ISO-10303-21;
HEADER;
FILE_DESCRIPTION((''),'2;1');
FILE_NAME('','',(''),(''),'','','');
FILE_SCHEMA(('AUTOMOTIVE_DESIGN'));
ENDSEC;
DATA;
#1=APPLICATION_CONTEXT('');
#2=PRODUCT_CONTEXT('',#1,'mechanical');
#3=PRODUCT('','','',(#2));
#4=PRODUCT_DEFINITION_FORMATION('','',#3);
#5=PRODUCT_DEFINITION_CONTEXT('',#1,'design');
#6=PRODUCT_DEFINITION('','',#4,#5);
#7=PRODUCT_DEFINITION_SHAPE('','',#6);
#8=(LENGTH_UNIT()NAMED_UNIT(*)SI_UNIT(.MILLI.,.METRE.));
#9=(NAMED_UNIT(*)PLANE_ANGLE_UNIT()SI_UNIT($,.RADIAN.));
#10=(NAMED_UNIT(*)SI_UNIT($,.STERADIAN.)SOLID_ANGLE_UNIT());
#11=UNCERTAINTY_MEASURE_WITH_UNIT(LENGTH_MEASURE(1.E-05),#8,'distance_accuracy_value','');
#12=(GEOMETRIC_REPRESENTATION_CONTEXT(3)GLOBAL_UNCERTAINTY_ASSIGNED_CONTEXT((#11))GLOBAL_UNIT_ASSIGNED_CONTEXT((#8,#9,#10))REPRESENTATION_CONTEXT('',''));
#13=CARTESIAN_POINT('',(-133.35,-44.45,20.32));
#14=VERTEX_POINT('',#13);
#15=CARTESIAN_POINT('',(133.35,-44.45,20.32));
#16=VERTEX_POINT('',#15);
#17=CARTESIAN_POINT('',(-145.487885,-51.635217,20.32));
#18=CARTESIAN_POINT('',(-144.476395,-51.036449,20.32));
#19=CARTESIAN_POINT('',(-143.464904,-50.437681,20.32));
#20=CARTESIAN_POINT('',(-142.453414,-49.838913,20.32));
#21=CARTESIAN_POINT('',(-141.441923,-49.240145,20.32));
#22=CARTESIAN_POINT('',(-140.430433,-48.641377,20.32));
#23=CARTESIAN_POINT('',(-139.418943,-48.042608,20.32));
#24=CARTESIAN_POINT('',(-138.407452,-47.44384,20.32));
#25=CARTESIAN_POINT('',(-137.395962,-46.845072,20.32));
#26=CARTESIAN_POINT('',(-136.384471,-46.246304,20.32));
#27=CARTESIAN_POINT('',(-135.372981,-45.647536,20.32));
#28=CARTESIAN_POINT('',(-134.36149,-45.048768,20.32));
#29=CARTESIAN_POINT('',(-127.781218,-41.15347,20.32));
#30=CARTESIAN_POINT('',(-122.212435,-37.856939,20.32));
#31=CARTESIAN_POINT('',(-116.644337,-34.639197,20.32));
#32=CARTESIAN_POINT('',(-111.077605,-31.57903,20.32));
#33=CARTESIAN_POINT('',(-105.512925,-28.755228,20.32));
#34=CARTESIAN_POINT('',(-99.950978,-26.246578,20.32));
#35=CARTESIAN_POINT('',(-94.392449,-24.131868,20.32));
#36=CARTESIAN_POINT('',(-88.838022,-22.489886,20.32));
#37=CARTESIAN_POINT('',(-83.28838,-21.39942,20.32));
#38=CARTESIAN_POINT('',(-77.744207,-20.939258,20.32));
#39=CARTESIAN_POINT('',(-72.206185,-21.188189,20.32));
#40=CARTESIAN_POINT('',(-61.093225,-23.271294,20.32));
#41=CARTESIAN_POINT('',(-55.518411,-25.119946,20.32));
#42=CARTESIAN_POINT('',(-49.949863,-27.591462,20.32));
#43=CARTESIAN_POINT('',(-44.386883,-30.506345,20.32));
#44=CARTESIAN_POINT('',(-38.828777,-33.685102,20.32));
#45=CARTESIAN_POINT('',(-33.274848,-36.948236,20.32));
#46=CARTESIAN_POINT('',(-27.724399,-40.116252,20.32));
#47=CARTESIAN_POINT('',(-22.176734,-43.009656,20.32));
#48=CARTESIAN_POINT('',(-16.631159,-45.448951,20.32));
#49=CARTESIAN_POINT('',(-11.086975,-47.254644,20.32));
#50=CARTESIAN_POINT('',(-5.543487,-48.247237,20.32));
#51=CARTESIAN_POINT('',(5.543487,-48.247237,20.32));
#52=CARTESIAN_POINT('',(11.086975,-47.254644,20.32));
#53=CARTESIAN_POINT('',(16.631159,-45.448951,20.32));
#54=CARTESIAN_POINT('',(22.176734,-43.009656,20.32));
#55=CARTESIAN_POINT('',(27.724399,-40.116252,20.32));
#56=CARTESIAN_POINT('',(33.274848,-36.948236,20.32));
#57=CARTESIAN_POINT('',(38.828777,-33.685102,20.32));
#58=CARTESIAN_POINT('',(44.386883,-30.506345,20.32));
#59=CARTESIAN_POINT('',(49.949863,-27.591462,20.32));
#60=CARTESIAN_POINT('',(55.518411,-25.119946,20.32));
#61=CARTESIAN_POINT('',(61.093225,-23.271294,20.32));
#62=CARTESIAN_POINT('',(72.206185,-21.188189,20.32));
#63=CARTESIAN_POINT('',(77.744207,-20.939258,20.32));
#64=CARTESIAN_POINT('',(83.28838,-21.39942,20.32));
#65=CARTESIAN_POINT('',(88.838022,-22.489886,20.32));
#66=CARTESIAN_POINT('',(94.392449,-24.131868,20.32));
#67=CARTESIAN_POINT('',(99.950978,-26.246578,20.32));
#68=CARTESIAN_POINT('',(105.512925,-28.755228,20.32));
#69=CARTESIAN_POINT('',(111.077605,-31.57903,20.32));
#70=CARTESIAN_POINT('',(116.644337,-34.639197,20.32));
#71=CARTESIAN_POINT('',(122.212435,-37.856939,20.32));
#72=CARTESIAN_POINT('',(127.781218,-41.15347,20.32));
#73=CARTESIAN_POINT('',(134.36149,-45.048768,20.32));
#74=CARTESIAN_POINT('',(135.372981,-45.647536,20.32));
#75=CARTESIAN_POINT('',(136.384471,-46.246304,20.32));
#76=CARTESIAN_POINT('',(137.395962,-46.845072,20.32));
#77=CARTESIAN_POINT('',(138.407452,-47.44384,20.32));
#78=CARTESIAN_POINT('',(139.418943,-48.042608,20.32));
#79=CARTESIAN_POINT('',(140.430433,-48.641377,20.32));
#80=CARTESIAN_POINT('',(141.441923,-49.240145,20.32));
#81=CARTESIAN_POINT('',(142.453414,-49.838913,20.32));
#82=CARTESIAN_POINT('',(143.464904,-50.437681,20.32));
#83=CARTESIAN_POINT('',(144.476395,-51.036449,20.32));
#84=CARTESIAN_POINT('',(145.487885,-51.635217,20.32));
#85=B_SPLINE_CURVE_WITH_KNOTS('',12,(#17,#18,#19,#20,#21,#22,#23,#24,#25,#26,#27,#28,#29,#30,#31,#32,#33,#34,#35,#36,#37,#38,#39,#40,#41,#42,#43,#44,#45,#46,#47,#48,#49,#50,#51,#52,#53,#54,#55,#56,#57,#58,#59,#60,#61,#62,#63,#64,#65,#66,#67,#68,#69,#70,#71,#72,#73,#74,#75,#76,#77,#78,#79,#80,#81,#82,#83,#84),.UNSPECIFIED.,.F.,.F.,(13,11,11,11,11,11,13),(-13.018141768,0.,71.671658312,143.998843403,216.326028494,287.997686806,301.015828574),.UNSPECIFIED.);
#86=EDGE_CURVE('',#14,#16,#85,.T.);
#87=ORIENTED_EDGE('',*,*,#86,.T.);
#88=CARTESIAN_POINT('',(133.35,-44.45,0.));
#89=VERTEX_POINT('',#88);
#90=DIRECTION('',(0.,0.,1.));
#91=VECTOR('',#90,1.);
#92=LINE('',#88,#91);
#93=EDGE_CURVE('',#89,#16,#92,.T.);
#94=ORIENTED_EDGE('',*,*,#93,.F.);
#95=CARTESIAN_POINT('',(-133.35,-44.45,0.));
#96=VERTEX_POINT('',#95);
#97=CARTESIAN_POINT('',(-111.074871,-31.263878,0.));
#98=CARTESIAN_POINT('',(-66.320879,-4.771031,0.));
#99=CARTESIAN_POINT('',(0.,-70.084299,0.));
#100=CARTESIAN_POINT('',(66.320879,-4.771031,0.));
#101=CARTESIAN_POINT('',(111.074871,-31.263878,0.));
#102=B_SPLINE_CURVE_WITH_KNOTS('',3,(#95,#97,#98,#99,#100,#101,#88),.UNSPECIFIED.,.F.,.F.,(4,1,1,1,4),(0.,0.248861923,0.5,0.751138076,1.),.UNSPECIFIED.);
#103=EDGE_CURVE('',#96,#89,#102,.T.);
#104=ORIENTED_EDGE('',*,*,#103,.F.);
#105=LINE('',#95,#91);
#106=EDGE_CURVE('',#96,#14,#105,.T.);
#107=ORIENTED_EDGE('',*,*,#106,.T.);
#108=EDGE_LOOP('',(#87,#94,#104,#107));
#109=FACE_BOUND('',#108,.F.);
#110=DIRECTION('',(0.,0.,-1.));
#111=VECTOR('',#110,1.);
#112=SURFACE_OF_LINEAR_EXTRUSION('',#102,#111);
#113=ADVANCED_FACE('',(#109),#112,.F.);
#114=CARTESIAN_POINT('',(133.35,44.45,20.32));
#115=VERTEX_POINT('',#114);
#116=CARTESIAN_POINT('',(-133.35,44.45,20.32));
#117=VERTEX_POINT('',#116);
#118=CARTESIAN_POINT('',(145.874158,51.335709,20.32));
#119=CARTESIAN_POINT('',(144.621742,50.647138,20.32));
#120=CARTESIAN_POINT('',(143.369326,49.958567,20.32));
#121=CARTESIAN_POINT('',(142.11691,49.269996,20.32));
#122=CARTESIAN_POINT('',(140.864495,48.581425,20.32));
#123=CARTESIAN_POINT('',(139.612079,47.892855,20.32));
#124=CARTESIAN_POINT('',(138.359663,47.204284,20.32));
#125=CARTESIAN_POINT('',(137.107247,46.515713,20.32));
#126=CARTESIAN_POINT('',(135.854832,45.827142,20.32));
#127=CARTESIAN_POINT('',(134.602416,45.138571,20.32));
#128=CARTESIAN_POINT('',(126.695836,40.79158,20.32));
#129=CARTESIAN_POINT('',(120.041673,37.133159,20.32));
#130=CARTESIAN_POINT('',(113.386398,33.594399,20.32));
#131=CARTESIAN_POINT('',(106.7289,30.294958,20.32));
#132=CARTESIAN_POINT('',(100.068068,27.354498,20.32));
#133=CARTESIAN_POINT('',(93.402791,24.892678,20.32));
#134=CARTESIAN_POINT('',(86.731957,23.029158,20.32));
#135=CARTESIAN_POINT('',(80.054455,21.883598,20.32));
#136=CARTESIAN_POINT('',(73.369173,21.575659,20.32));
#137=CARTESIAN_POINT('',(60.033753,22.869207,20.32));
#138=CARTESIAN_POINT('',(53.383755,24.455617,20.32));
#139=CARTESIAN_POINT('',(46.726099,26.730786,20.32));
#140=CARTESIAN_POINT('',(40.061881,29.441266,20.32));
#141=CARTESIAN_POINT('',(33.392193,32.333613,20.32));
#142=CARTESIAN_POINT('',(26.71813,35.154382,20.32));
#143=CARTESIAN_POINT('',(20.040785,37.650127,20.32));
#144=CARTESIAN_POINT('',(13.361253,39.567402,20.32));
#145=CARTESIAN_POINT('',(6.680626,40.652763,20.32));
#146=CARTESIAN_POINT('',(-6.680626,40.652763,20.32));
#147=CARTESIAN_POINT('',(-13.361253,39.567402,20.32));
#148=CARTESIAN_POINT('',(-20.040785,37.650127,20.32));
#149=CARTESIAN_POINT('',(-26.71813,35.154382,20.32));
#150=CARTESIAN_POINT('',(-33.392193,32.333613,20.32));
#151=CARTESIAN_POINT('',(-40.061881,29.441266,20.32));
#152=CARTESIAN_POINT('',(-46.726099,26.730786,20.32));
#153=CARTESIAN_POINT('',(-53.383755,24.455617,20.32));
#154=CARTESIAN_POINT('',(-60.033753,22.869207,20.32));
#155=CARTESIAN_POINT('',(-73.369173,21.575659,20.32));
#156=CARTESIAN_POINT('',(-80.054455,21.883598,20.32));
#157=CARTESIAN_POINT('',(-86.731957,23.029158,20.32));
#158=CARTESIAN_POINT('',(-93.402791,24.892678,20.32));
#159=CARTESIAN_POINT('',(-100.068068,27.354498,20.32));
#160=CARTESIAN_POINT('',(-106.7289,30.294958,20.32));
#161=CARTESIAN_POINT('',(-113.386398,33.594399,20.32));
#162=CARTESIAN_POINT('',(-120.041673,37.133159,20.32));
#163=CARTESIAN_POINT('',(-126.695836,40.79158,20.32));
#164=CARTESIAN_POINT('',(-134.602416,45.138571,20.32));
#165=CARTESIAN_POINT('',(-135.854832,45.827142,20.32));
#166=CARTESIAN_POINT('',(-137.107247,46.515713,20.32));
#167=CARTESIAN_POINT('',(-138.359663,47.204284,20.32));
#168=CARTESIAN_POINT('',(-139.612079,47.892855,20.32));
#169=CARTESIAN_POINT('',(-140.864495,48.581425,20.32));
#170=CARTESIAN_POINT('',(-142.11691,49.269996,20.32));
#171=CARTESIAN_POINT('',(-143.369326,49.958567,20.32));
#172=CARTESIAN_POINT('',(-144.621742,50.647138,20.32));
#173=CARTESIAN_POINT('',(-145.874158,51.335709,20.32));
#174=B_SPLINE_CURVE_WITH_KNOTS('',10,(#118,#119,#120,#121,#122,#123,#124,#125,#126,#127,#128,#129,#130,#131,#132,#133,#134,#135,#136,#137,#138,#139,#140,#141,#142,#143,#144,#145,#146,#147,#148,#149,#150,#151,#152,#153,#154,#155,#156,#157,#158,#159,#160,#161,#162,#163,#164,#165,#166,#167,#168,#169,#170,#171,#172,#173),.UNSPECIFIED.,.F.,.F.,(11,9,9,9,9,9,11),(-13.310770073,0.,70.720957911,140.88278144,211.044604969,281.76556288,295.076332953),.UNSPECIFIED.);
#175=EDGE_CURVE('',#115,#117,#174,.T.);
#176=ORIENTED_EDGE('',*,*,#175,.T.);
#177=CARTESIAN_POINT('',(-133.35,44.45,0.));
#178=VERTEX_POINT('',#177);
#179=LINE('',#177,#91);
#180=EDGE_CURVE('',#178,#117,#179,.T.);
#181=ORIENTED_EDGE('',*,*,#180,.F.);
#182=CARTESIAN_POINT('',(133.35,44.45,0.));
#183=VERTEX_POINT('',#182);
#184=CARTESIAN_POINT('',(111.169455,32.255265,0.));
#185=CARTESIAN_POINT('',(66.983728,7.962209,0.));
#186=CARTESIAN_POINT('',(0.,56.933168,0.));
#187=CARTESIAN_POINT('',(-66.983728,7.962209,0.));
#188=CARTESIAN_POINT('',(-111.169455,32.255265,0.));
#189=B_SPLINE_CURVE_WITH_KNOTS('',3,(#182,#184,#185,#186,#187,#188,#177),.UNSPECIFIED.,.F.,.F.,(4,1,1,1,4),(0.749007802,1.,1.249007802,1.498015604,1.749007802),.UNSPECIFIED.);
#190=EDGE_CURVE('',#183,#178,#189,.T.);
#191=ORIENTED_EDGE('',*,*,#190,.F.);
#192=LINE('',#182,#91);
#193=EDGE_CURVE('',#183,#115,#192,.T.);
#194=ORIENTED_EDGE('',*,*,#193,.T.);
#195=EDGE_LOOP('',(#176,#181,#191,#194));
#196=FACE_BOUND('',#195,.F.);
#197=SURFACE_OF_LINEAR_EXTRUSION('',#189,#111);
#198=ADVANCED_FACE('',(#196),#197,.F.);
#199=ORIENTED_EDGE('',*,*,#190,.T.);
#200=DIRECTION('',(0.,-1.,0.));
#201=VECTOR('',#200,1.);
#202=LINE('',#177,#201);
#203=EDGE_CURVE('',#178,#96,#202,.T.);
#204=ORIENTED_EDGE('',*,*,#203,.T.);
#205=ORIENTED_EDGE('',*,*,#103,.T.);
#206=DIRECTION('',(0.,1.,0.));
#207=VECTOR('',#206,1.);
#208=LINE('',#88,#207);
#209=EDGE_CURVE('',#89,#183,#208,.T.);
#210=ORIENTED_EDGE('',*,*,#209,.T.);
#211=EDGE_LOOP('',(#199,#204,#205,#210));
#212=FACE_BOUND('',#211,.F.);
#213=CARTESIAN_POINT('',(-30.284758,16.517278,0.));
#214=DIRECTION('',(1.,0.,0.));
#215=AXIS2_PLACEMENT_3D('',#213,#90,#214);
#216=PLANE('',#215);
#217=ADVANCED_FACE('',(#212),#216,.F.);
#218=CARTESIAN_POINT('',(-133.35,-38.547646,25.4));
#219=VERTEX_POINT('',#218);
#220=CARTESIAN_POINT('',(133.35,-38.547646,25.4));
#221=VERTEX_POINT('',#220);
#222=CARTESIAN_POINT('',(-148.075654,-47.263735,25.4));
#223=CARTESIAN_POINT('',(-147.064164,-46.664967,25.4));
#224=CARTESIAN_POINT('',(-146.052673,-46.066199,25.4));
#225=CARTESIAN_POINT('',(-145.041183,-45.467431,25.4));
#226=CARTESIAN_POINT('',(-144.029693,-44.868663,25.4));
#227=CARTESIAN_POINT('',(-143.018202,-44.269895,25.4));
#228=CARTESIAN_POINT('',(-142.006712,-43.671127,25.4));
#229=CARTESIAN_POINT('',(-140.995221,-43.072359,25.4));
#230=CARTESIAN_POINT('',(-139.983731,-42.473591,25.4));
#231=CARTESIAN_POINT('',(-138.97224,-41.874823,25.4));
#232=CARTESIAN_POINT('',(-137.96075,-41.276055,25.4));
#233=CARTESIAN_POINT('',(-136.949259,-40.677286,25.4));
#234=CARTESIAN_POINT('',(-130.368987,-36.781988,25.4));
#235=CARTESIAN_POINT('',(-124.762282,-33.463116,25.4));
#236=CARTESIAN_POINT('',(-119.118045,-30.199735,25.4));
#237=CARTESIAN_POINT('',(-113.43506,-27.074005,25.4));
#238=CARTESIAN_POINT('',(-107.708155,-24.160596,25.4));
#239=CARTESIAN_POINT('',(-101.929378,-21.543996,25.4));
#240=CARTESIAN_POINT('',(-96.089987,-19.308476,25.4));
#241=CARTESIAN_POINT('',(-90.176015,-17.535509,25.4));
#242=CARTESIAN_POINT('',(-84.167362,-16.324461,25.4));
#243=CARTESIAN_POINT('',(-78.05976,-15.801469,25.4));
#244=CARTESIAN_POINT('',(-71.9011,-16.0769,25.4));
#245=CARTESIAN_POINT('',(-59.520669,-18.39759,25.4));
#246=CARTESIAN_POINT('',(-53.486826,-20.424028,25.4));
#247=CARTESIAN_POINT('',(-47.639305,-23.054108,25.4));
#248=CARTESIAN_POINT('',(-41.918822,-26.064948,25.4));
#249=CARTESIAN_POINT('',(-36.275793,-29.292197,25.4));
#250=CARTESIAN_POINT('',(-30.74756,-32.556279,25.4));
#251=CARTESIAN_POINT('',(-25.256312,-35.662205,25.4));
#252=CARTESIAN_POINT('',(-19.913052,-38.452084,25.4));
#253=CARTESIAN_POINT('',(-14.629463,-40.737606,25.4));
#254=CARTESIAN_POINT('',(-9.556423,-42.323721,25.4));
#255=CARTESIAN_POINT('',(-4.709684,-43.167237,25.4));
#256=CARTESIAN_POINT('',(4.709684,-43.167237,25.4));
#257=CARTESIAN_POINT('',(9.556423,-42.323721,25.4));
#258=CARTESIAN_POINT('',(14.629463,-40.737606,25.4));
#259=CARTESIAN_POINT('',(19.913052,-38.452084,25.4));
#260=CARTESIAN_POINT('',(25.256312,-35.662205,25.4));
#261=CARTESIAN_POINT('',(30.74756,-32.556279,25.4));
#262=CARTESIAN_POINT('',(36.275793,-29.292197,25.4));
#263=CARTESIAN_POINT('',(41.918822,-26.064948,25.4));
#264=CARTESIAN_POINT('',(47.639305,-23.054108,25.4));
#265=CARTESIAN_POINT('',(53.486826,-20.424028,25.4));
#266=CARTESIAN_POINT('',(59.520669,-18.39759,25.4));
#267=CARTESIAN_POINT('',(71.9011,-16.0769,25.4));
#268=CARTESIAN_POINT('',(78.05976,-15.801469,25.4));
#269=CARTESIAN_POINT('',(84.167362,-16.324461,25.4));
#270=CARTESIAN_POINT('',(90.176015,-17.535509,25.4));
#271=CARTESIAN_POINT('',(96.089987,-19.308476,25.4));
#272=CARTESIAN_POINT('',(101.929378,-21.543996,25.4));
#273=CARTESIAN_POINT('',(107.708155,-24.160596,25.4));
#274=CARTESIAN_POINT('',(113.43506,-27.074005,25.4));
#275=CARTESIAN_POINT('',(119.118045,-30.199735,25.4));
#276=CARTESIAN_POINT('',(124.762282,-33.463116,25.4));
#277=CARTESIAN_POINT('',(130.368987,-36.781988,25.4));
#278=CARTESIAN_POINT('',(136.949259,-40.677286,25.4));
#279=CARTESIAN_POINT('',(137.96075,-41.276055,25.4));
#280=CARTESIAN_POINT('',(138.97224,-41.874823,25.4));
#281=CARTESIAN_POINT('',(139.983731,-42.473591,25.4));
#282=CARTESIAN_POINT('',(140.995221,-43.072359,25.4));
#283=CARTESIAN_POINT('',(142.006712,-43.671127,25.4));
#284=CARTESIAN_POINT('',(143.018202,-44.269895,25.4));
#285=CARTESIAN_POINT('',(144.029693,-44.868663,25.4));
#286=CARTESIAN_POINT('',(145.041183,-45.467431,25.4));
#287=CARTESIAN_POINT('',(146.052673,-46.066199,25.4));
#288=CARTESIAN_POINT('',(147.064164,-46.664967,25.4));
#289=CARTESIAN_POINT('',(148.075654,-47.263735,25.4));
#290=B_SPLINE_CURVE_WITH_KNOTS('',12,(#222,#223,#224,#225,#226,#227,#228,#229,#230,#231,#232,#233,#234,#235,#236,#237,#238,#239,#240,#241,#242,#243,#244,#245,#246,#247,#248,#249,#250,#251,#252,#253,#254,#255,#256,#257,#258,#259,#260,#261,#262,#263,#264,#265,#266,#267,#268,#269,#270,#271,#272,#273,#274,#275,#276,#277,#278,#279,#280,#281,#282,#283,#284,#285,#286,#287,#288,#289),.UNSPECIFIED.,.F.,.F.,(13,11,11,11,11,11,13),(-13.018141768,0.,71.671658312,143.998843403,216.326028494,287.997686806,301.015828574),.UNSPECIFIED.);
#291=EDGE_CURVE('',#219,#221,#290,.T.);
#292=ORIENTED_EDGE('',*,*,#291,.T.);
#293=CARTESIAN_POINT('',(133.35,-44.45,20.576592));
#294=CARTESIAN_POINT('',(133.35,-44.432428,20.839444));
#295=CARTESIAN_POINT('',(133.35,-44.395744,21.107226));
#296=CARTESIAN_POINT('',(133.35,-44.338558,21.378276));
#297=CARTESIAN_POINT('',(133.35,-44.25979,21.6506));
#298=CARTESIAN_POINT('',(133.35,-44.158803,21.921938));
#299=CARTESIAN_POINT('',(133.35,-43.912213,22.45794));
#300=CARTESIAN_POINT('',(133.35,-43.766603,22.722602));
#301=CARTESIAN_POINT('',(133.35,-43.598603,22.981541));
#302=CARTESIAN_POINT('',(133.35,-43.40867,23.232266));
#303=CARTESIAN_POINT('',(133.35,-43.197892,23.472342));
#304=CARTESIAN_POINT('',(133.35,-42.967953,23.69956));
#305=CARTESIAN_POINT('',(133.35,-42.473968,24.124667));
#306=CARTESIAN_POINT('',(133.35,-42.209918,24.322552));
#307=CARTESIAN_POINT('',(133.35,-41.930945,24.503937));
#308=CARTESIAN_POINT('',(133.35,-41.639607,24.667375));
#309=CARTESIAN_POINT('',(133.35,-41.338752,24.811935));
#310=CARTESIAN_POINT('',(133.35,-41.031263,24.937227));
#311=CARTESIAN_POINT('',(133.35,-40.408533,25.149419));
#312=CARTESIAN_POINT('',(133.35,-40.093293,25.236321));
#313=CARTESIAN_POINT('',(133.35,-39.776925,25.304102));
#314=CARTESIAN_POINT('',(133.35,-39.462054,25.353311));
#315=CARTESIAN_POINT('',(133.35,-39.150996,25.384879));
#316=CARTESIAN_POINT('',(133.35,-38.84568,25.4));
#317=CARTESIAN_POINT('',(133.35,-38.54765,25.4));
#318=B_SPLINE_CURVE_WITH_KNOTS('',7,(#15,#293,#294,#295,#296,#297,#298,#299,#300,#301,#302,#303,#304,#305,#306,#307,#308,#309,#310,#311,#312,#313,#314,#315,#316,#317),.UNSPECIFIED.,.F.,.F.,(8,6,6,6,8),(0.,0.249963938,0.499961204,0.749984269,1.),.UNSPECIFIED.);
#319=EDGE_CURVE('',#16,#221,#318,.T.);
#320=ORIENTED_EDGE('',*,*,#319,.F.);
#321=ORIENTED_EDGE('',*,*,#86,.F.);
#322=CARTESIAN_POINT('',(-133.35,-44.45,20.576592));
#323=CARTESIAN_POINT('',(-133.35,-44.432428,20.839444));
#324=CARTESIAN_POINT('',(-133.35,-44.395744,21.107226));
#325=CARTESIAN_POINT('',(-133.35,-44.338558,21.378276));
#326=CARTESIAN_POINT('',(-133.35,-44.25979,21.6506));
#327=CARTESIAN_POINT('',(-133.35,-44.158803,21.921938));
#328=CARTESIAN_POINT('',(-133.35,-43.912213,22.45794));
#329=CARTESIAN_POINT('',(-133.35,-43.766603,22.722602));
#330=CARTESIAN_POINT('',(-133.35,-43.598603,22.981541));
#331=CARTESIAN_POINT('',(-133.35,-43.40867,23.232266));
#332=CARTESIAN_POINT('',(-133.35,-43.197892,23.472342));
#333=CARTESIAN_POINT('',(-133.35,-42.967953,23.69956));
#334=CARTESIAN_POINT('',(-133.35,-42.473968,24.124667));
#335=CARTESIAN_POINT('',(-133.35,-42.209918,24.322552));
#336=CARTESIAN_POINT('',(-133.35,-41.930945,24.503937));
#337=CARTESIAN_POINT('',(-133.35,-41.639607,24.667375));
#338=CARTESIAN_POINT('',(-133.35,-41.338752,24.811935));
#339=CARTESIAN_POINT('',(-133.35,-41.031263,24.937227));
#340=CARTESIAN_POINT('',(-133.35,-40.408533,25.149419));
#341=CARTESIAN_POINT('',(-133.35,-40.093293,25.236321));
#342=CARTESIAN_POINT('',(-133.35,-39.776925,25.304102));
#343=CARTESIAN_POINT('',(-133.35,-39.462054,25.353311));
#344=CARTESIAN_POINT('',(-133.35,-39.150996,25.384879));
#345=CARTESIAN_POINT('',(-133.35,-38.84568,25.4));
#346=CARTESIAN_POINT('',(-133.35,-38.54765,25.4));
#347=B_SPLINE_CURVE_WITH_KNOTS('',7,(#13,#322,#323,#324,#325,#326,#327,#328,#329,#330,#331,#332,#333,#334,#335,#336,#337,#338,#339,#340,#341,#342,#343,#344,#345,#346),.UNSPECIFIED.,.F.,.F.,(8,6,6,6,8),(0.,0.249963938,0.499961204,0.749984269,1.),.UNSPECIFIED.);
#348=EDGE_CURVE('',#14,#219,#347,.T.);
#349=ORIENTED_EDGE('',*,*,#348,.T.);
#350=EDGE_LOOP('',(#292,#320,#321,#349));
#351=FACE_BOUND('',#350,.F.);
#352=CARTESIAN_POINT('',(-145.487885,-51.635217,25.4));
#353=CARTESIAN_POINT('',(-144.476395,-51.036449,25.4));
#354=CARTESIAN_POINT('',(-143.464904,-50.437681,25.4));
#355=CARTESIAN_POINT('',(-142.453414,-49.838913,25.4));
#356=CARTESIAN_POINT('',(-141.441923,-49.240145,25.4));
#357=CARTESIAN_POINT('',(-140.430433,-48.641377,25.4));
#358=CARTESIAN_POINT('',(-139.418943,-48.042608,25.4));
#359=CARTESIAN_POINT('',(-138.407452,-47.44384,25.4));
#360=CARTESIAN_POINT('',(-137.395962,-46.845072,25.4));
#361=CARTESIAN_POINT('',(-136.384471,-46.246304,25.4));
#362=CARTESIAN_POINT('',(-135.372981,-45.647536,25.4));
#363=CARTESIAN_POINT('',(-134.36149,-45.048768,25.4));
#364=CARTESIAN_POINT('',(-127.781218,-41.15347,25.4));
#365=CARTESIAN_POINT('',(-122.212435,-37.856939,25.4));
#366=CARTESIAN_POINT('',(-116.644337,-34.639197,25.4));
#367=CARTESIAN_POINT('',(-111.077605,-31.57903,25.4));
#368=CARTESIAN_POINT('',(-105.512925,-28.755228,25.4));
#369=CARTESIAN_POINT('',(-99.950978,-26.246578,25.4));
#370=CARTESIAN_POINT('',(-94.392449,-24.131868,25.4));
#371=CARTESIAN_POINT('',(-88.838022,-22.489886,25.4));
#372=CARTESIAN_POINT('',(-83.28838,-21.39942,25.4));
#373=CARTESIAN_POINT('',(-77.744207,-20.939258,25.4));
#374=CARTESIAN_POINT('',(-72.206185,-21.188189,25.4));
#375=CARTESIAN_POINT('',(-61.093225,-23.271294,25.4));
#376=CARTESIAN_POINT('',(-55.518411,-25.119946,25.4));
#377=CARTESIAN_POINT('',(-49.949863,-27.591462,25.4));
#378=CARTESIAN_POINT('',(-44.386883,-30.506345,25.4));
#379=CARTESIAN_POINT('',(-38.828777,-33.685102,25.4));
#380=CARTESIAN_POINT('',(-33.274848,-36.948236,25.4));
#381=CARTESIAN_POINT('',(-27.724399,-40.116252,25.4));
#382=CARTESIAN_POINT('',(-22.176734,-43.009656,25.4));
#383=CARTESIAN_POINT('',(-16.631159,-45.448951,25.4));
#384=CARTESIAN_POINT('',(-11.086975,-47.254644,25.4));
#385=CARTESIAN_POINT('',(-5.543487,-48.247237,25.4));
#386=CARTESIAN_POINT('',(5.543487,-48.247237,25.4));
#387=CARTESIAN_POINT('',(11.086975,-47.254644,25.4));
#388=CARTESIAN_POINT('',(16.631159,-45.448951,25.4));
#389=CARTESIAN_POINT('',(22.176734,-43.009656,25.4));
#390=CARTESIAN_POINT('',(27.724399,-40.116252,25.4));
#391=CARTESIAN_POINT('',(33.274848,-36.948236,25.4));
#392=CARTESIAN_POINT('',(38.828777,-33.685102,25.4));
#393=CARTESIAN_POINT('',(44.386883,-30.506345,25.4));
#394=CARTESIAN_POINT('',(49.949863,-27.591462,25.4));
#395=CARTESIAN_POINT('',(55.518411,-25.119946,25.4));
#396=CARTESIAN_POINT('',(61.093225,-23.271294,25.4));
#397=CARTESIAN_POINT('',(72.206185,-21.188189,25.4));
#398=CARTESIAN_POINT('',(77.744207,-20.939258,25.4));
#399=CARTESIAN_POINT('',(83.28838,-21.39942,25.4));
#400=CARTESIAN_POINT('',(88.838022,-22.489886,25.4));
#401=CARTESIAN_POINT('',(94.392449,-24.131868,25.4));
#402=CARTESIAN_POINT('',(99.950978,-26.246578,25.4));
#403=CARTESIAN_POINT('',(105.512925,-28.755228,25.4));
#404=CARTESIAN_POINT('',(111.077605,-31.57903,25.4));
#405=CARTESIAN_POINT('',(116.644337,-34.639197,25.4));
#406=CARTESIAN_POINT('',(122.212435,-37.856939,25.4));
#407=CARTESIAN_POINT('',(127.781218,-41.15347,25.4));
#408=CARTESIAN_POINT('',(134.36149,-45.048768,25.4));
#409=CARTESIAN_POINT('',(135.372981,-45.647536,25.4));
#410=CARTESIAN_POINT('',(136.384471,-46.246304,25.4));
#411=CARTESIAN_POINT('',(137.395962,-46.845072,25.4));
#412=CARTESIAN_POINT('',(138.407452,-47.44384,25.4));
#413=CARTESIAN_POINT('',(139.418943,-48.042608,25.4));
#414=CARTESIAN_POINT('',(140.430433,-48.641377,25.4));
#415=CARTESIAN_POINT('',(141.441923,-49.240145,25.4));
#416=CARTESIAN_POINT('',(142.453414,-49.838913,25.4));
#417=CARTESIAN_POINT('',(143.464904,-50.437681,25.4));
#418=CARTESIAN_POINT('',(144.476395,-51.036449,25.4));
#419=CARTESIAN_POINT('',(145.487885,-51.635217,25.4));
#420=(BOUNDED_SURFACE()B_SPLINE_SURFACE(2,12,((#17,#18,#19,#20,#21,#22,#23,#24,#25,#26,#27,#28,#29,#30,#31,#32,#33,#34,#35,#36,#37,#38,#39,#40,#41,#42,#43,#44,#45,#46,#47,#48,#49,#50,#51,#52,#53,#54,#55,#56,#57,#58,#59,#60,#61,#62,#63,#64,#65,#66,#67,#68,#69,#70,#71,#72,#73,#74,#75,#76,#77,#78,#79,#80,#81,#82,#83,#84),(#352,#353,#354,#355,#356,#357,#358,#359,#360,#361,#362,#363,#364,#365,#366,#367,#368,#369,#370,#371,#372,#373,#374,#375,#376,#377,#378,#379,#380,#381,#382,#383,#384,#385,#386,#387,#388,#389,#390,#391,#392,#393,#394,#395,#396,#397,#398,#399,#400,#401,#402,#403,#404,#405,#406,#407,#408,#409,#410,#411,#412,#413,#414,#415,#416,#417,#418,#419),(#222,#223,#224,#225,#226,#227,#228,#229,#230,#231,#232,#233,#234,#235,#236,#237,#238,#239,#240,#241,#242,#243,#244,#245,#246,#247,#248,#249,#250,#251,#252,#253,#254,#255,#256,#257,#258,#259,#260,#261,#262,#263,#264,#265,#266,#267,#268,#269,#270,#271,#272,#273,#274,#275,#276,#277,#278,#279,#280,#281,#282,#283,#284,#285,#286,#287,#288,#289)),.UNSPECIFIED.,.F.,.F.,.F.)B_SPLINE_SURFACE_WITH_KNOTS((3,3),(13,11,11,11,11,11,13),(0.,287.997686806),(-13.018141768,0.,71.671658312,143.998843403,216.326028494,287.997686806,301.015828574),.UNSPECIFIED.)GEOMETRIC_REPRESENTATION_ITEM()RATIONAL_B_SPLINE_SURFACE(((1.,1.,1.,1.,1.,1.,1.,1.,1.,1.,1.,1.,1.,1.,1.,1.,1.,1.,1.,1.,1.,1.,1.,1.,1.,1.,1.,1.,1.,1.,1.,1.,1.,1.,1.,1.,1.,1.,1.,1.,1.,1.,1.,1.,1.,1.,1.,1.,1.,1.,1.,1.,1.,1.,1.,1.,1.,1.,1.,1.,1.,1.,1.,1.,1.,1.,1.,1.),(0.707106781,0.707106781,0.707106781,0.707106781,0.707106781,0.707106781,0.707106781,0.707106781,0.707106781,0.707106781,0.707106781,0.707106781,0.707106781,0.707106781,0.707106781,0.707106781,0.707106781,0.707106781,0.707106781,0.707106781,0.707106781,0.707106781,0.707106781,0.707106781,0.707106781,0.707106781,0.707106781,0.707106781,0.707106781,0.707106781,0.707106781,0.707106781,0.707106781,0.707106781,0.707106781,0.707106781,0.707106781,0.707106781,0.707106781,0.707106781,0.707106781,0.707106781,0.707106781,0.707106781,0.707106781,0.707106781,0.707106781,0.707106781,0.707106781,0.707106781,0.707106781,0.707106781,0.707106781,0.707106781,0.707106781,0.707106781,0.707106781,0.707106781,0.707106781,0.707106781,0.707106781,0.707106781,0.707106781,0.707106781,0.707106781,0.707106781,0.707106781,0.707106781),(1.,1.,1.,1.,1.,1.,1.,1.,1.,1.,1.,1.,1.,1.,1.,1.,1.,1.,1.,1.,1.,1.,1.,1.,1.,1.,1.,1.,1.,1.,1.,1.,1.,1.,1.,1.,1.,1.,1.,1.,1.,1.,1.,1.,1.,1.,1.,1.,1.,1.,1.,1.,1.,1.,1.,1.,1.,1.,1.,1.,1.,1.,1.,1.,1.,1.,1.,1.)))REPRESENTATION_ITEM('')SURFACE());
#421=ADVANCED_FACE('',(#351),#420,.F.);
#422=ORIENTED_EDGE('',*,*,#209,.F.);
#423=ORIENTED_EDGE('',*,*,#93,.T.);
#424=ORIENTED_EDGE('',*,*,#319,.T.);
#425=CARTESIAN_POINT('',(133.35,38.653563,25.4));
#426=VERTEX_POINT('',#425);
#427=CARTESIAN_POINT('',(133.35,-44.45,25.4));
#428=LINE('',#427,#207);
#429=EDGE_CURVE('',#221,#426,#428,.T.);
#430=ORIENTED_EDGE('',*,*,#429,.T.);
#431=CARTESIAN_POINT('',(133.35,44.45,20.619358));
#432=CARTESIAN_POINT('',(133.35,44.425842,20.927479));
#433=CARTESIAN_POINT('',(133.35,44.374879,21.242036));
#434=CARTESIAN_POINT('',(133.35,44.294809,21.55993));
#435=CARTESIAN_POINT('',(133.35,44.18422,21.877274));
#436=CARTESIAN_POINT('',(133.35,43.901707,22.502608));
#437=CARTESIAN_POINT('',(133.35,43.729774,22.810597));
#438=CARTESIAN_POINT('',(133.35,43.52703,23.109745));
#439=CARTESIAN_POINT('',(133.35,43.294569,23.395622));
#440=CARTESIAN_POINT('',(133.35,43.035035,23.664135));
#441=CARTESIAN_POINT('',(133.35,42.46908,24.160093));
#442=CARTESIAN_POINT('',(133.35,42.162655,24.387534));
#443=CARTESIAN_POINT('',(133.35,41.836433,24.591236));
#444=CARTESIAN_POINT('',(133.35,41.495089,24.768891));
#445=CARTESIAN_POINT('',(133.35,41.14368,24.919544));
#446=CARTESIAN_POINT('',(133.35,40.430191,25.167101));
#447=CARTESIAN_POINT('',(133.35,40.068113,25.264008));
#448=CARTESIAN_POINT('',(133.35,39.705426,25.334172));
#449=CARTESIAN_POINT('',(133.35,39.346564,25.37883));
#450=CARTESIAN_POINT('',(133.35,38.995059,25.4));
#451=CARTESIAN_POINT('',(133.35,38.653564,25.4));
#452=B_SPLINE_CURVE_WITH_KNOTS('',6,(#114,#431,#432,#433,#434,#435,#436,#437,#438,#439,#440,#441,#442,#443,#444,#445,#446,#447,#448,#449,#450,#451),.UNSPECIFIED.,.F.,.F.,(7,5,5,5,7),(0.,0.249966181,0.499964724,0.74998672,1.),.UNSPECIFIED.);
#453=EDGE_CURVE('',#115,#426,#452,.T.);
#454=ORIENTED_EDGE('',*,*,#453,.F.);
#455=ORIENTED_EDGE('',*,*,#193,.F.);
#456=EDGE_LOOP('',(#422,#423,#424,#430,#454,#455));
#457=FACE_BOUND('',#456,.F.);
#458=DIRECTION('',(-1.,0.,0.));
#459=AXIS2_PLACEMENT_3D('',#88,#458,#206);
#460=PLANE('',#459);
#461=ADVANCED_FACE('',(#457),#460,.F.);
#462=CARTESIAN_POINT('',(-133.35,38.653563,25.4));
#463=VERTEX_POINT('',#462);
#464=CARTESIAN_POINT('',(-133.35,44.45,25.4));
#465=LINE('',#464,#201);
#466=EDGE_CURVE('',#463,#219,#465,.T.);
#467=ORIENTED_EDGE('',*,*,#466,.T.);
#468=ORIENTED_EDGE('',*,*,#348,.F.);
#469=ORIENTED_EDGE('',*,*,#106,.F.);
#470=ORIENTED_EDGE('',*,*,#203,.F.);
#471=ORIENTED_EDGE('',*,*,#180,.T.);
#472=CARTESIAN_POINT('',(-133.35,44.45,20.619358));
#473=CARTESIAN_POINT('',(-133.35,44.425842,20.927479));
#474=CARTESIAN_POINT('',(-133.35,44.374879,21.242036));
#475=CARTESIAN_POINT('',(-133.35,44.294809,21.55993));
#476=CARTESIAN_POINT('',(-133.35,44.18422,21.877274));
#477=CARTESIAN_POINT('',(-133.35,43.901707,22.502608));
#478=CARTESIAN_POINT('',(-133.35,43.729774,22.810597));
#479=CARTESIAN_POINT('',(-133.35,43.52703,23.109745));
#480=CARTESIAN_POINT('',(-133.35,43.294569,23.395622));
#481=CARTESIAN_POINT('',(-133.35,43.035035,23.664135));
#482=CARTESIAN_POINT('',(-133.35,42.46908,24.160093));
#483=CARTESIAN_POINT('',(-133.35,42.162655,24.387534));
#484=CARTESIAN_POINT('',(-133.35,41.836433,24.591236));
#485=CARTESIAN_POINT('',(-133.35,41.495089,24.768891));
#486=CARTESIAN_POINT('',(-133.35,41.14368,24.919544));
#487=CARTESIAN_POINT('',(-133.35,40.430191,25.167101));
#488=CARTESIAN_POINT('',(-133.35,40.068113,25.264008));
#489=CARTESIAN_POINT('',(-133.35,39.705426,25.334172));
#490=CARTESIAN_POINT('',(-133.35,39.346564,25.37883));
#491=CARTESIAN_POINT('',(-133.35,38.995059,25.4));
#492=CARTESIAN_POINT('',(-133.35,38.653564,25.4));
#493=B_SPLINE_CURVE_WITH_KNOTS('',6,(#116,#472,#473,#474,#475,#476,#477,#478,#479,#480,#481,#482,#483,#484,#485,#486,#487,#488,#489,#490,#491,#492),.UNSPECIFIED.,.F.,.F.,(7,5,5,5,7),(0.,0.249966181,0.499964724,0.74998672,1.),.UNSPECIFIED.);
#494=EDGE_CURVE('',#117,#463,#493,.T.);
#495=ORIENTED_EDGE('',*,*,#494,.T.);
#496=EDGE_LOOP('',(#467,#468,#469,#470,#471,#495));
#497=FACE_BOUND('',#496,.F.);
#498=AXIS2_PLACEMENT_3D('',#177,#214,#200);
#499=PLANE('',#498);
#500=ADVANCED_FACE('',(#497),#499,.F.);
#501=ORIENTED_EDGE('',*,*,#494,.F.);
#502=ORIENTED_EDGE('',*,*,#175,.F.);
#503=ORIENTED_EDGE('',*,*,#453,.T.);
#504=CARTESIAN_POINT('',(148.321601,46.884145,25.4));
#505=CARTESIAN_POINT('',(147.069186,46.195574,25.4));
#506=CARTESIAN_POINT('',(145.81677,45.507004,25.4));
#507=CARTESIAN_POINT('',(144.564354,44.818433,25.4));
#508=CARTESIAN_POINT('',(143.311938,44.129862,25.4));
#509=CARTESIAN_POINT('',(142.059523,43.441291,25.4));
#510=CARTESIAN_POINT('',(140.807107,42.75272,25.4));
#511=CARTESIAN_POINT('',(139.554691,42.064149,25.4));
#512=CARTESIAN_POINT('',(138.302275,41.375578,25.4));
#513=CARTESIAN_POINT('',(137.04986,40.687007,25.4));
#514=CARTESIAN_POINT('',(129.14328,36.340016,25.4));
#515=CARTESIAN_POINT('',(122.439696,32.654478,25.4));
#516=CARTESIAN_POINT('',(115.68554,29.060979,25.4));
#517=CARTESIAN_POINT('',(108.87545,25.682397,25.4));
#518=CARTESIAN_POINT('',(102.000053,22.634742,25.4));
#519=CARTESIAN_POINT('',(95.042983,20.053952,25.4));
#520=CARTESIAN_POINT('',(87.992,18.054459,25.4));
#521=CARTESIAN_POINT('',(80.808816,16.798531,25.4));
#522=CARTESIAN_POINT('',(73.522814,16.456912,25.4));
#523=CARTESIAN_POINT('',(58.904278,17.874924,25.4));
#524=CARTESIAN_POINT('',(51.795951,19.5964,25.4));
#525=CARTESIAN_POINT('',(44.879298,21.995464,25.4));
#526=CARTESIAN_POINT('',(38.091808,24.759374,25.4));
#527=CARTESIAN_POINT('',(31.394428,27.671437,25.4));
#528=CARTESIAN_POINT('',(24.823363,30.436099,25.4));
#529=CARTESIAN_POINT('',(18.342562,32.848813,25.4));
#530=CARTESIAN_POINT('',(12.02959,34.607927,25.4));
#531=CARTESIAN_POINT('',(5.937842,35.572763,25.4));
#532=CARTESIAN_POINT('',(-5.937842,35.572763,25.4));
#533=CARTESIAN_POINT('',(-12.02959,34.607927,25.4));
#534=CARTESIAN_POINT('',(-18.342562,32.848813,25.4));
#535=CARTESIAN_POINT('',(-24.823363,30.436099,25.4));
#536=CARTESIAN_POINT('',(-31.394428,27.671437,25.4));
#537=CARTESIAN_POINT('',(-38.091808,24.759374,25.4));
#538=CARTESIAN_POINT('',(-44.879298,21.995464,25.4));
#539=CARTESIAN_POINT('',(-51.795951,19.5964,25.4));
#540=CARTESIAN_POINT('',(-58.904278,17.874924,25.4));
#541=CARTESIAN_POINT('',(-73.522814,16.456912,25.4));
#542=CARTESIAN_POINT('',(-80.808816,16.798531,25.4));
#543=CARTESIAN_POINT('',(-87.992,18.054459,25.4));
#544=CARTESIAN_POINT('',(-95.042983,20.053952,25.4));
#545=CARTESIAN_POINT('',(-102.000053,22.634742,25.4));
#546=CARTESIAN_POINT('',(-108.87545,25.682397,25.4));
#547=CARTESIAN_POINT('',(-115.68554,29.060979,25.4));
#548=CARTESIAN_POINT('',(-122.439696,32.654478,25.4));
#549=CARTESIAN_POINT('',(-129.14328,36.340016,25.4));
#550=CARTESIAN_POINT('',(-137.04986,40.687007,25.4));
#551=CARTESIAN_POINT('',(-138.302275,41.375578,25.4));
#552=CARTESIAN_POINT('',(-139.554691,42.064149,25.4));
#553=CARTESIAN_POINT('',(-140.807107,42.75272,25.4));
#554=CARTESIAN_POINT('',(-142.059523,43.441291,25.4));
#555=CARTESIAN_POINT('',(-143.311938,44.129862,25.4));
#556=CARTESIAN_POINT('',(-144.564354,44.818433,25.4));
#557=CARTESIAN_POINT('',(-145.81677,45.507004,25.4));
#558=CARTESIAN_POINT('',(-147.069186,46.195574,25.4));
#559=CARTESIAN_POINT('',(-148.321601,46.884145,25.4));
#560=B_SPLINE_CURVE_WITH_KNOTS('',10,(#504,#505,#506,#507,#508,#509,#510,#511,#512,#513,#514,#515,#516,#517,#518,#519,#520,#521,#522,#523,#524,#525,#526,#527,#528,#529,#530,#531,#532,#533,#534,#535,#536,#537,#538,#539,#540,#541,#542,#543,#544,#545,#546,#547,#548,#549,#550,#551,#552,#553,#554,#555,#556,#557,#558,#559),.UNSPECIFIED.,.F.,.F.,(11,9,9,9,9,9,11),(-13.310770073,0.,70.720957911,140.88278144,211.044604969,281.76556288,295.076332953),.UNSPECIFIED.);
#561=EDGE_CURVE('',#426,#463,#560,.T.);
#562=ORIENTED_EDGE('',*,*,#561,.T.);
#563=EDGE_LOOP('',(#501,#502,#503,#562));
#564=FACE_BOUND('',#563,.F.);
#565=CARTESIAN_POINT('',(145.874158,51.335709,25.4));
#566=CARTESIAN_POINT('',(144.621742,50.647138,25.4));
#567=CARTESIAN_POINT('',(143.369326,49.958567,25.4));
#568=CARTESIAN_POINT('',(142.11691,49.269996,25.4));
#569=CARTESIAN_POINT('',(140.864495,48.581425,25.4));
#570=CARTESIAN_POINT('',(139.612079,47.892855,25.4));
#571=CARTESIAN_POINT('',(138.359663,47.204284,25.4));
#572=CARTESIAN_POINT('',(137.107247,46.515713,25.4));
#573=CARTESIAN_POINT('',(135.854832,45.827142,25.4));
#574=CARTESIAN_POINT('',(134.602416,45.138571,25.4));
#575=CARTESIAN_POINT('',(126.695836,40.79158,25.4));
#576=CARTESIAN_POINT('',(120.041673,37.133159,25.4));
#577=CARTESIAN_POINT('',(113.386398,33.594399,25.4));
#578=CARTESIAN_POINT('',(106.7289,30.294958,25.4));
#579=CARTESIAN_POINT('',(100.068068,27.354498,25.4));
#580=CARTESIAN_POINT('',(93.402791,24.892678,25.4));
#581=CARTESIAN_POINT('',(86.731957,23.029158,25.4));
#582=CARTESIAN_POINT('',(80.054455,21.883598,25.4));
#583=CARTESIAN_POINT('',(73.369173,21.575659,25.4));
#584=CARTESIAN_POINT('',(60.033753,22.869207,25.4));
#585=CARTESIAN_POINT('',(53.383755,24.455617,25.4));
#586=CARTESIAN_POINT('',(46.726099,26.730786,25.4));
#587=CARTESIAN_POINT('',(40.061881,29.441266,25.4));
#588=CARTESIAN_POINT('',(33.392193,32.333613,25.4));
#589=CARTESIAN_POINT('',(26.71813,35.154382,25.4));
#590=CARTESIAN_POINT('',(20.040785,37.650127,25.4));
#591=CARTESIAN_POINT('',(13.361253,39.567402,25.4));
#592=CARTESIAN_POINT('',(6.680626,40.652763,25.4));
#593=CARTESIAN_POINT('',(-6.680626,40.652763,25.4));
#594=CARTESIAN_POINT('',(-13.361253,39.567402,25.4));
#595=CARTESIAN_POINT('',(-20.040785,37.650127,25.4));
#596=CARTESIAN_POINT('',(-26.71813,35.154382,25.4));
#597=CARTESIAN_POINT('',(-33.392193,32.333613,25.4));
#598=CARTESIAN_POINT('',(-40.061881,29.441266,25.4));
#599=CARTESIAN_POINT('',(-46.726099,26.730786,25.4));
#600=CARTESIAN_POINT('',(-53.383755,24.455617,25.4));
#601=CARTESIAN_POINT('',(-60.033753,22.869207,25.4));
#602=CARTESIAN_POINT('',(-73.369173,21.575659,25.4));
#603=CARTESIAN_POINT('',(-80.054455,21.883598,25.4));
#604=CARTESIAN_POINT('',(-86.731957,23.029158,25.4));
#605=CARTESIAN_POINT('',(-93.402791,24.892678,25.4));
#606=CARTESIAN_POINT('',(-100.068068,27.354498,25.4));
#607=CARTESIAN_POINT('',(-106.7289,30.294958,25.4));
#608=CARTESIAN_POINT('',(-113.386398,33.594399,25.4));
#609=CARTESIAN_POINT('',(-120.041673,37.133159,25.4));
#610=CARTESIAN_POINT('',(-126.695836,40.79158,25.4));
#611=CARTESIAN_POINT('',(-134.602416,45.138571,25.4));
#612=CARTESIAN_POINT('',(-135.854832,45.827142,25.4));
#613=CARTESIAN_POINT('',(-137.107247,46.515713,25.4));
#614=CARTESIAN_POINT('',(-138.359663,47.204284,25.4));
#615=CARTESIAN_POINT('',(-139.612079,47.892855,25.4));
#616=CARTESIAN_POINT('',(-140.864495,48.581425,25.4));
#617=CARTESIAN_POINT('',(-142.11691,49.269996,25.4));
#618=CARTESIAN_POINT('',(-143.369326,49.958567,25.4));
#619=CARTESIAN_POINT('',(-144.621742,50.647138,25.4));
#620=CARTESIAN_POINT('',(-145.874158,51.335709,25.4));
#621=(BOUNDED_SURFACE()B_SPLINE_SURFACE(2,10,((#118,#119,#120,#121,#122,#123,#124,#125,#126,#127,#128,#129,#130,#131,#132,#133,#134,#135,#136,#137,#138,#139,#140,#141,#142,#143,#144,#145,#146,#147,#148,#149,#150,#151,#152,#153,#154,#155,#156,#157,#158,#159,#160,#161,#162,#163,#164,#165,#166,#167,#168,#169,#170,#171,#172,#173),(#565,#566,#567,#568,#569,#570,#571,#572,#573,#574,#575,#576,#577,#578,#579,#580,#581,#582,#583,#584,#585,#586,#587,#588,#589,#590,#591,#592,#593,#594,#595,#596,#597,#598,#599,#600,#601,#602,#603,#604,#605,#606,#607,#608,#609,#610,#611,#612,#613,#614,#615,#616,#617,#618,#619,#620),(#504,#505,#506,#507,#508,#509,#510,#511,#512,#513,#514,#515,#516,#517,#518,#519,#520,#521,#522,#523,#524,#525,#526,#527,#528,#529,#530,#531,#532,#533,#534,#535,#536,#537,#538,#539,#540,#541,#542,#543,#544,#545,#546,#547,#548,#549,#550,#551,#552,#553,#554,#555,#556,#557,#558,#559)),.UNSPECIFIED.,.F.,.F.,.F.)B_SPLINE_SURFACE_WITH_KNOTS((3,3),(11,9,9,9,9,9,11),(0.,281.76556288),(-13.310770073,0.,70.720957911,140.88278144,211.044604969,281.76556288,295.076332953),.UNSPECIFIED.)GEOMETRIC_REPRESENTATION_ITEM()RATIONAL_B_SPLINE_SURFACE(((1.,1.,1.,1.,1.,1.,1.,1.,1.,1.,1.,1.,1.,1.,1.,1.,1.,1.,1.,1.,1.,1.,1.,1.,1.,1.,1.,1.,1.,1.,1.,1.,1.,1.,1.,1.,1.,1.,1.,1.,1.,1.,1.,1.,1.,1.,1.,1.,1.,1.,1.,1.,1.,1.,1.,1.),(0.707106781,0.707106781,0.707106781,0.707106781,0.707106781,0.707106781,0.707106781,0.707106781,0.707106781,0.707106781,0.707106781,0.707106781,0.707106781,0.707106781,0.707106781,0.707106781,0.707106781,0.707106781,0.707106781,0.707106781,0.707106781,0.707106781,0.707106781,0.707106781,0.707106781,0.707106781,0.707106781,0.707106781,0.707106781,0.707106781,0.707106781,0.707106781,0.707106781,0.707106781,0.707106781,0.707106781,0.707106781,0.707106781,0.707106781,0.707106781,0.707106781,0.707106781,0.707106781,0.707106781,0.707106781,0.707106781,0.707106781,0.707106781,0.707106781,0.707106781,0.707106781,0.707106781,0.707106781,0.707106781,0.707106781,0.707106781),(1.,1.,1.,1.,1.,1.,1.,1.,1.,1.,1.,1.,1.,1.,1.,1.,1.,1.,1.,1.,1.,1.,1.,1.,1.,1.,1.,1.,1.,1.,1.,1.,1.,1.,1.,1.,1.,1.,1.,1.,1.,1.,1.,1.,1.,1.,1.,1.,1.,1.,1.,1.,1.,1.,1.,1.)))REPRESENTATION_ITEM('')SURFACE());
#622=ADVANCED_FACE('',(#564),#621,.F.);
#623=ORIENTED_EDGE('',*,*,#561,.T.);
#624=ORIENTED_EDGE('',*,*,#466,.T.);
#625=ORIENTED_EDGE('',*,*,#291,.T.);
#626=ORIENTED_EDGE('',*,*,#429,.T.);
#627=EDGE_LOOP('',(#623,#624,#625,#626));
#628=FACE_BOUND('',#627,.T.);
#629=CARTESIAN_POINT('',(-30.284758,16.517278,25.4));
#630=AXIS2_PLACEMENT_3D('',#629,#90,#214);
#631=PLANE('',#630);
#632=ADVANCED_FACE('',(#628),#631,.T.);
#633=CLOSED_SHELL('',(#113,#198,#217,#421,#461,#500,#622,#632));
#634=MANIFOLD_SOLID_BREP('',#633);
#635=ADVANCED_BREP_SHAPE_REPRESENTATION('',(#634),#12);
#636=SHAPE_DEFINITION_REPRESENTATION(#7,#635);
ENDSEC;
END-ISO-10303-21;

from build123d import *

# Parameters (mm, degrees)
F1_DEPTH = 25.4
F2_R     = 5.08


with BuildPart() as f1:
    # F0 (on Top) → F1 (new body)
    with BuildSketch(Plane.XY):
        with BuildLine():
            Line((-66.675, 0), (0, 0))
            Line((0, 0), (0, 40.6527627649))
            add(Edge.make_bspline(
                [(-66.675, 22.225), (-44.5375090127, 24.3723570613), (-22.2687545064, 40.6527627649), (0, 40.6527627649)],
                knots=[0.2509921979, 0.2509921979, 0.2509921979, 0.2509921979, 0.5, 0.5, 0.5, 0.5], degree=3))
            Line((-66.675, 22.225), (-66.675, 0))
        make_face()
        with BuildLine():
            Line((66.675, 0), (0, 0))
            Line((0, 0), (0, -48.2472372351))
            add(Edge.make_bspline(
                [(0, -48.2472372351), (22.1739498153, -48.2472372351), (44.3478996306, -26.4101755095), (66.675, -22.225)],
                knots=[0.5, 0.5, 0.5, 0.5, 0.7511380765, 0.7511380765, 0.7511380765, 0.7511380765], degree=3))
            Line((66.675, -22.225), (66.675, 0))
        make_face()
        with BuildLine():
            Line((0, -48.2472372351), (0, 0))
            Line((0, 0), (-66.675, 0))
            Line((-66.675, 0), (-66.675, -22.225))
            add(Edge.make_bspline(
                [(-66.675, -22.225), (-44.3478996306, -26.4101755095), (-22.1739498153, -48.2472372351), (0, -48.2472372351)],
                knots=[0.2488619235, 0.2488619235, 0.2488619235, 0.2488619235, 0.5, 0.5, 0.5, 0.5], degree=3))
        make_face()
        with BuildLine():
            Line((0, 40.6527627649), (0, 0))
            Line((0, 0), (66.675, 0))
            Line((66.675, 0), (66.675, 22.225))
            add(Edge.make_bspline(
                [(0, 40.6527627649), (22.2687545064, 40.6527627649), (44.5375090127, 24.3723570613), (66.675, 22.225)],
                knots=[0.5, 0.5, 0.5, 0.5, 0.7490078021, 0.7490078021, 0.7490078021, 0.7490078021], degree=3))
        make_face()
        with BuildLine():
            Line((-66.675, -22.225), (-66.675, 0))
            Line((-66.675, 0), (-133.35, 0))
            Line((-133.35, 0), (-133.35, -44.45))
            add(Edge.make_bspline(
                [(-133.35, -44.45), (-111.0748709935, -31.2638781059), (-88.7997419869, -18.0777562117), (-66.675, -22.225)],
                knots=[0, 0, 0, 0, 0.2488619235, 0.2488619235, 0.2488619235, 0.2488619235], degree=3))
        make_face()
        with BuildLine():
            Line((-133.35, 0), (-66.675, 0))
            Line((-66.675, 0), (-66.675, 22.225))
            add(Edge.make_bspline(
                [(-133.35, 44.45), (-111.1694546629, 32.2552650985), (-88.9889093259, 20.060530197), (-66.675, 22.225)],
                knots=[0, 0, 0, 0, 0.2509921979, 0.2509921979, 0.2509921979, 0.2509921979], degree=3))
            Line((-133.35, 44.45), (-133.35, 0))
        make_face()
        with BuildLine():
            Line((66.675, 22.225), (66.675, 0))
            Line((66.675, 0), (133.35, 0))
            Line((133.35, 0), (133.35, 44.45))
            add(Edge.make_bspline(
                [(66.675, 22.225), (88.9889093259, 20.060530197), (111.1694546629, 32.2552650985), (133.35, 44.45)],
                knots=[0.7490078021, 0.7490078021, 0.7490078021, 0.7490078021, 1, 1, 1, 1], degree=3))
        make_face()
        with BuildLine():
            Line((133.35, 0), (66.675, 0))
            Line((66.675, 0), (66.675, -22.225))
            add(Edge.make_bspline(
                [(66.675, -22.225), (88.7997419869, -18.0777562117), (111.0748709935, -31.2638781059), (133.35, -44.45)],
                knots=[0.7511380765, 0.7511380765, 0.7511380765, 0.7511380765, 1, 1, 1, 1], degree=3))
            Line((133.35, -44.45), (133.35, 0))
        make_face()
    extrude(amount=F1_DEPTH)

    # F2
    f2_edges = [f1.edges().sort_by_distance(p)[0] for p in [
        (0, -48.247237, 25.4),
        (0, 40.652763, 25.4),
    ]]
    fillet(f2_edges, radius=F2_R)


solid = f1.part
